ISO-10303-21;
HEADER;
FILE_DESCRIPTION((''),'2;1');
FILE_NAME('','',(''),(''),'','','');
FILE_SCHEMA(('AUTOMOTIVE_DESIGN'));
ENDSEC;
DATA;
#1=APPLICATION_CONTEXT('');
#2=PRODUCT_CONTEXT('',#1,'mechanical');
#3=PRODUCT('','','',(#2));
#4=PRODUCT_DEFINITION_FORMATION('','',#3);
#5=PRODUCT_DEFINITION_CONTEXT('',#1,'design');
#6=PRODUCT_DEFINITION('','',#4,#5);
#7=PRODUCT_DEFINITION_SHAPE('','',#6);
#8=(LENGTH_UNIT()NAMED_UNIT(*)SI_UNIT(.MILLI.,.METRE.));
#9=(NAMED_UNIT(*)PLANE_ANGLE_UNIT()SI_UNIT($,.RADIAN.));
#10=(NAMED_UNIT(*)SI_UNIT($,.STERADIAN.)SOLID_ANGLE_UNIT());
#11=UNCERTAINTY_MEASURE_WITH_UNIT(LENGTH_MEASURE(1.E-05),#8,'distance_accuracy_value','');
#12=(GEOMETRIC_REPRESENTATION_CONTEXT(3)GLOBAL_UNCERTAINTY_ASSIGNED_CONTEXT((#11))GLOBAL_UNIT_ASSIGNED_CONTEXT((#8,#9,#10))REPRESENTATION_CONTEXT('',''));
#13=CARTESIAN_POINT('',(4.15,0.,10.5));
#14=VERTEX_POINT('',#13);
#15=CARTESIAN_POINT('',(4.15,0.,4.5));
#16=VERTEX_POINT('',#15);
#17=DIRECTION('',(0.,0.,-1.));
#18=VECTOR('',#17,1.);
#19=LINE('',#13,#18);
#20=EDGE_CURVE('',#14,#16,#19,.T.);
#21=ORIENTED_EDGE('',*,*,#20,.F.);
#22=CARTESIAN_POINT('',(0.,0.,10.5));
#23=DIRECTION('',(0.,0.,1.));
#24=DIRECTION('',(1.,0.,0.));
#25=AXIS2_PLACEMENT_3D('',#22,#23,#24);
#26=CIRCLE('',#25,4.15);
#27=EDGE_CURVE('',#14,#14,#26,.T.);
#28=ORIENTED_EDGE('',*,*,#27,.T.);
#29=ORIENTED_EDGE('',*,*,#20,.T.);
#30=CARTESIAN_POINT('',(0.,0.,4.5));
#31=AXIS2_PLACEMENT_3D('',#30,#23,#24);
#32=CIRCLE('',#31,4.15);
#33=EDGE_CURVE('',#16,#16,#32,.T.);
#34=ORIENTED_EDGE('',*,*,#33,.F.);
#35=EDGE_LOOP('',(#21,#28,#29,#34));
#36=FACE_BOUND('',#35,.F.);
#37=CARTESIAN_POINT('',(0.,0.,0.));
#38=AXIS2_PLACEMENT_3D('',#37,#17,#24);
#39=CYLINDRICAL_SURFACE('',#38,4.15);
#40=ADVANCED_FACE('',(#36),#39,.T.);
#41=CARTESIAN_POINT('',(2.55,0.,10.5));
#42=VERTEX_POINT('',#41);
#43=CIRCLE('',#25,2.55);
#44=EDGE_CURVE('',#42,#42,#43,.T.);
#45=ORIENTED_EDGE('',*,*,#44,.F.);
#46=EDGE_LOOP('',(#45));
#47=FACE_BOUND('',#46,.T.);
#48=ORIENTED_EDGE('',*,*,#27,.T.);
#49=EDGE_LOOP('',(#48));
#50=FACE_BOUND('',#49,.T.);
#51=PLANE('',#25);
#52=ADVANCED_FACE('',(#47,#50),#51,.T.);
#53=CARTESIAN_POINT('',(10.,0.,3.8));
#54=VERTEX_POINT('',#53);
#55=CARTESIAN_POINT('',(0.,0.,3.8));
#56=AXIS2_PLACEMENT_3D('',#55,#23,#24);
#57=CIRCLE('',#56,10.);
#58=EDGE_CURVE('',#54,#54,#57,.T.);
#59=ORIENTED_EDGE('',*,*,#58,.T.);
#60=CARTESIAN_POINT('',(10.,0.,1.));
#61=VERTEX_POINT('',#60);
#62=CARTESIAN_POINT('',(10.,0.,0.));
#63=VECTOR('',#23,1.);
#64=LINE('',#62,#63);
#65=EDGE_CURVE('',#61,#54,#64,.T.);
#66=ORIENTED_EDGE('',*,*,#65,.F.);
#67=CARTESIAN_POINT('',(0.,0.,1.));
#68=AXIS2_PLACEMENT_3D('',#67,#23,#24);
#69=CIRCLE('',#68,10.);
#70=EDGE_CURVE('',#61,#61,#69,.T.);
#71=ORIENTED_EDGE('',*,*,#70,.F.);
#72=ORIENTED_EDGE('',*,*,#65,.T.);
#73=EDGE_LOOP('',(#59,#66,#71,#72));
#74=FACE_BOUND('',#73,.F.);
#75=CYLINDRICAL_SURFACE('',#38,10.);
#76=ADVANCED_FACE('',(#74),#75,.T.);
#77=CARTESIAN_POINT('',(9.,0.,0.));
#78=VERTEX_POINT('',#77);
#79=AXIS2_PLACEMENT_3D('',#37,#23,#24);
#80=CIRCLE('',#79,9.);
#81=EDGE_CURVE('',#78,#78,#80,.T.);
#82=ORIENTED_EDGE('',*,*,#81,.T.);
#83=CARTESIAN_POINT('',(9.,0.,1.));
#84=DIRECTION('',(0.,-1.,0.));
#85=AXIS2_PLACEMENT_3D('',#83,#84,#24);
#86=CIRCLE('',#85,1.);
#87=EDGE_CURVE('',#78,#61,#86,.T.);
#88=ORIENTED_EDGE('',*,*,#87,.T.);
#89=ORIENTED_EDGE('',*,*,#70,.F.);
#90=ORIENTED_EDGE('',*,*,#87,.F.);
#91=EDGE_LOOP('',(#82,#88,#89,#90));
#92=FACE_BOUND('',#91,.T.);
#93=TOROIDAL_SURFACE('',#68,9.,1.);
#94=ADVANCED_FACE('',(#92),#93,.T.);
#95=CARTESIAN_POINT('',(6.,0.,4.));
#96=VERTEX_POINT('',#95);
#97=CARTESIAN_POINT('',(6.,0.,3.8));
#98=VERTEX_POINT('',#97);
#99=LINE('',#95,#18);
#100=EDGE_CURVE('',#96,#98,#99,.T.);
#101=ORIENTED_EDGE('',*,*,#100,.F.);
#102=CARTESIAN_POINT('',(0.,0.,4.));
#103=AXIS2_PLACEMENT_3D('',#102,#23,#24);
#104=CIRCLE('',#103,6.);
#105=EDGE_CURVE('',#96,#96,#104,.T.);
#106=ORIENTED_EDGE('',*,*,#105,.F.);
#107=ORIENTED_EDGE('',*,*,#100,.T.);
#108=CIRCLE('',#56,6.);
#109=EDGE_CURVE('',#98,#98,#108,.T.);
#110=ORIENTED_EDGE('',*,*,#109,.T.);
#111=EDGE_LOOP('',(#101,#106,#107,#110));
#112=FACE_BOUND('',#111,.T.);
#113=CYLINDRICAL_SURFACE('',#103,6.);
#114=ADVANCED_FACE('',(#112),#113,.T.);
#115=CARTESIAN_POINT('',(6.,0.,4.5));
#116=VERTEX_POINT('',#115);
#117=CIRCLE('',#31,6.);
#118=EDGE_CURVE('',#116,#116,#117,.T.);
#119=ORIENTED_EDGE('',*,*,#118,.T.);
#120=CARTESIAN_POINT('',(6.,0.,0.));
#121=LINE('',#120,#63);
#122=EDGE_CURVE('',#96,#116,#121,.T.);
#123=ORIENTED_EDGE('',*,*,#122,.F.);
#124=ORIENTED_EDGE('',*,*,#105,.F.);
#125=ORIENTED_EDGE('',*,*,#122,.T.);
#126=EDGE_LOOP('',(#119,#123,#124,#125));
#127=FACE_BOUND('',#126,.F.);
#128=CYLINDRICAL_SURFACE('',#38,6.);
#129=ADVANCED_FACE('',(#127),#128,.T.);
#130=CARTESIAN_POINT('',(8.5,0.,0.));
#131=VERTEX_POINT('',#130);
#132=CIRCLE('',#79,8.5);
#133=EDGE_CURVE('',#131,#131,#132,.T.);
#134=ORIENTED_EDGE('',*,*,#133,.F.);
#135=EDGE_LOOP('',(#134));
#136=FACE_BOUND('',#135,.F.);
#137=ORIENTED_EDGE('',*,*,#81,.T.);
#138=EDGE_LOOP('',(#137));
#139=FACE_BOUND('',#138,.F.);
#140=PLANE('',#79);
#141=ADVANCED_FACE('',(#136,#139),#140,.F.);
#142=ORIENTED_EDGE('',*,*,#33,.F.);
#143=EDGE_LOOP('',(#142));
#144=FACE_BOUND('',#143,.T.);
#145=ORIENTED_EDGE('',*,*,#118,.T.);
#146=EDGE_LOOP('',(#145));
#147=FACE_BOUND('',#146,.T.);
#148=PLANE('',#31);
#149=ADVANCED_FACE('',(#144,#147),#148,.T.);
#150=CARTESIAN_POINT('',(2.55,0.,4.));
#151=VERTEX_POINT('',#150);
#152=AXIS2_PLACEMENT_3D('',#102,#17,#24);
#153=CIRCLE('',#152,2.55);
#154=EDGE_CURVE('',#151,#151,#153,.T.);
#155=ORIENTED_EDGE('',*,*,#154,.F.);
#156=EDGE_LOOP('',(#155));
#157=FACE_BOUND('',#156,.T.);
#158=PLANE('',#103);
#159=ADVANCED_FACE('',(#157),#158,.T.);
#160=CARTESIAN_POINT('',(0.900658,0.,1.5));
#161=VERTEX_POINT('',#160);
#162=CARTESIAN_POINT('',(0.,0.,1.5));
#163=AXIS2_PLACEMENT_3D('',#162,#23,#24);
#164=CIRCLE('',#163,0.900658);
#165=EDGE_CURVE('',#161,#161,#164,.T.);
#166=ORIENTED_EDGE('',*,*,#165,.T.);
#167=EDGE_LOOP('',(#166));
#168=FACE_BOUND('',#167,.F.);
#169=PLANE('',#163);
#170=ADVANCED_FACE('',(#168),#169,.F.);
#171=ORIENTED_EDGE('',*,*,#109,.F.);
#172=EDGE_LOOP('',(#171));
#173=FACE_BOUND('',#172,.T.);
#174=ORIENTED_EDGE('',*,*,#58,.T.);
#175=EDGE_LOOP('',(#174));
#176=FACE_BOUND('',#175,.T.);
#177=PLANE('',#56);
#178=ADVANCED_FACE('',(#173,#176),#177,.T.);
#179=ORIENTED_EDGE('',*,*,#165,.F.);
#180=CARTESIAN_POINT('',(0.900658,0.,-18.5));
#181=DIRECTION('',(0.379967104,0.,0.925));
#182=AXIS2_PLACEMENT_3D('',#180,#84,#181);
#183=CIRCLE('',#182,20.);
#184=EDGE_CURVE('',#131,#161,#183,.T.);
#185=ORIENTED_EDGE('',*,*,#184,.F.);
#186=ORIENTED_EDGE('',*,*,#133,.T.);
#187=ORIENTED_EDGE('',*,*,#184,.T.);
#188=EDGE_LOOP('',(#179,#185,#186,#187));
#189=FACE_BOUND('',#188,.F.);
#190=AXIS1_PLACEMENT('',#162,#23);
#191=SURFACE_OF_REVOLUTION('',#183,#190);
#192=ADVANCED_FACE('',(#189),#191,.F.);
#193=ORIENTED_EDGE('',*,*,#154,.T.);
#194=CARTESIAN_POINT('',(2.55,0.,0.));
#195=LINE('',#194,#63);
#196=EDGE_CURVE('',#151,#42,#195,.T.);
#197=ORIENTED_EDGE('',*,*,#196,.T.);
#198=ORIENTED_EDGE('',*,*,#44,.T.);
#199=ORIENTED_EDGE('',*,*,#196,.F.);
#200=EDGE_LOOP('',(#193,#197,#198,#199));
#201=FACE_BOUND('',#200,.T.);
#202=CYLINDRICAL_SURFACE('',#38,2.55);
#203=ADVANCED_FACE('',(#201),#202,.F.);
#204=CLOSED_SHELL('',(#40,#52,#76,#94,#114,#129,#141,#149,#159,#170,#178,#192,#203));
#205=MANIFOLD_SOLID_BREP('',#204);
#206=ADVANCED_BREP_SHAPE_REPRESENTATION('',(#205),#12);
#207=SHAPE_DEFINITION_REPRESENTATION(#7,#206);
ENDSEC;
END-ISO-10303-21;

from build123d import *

# Parameters (mm, degrees)
F0_R     = 10
F0_R_2   = 6
F1_DEPTH = 4
F0_R_3   = 4.15
F0_R_4   = 2.55
F2_DEPTH = 10.5
F3_DEPTH = 4.5
F4_R     = 8.5
F4_R_2   = 6
F5_DEPTH = 1.5
F7_R     = 1
F8_DEPTH = 0.2


# Not quite as in the source:
# - a fillet or chamfer that OpenCascade refuses, or shapes differently, is made with other operations: its cross-section is extruded or revolved along the edge and cut away or added
# - a feature names something its author has since deleted; it is built from what else it names


with BuildPart() as f1:
    # F0 (on Top) → F1 (new body)
    with BuildSketch(Plane.XY):
        Circle(F0_R)
        Circle(F0_R_2, mode=Mode.SUBTRACT)
    extrude(amount=F1_DEPTH)



with BuildPart() as f1b:
    # F0 (on Top) → F1, piece 2 (new body)
    with BuildSketch(Plane.XY):
        Circle(F0_R_3)
        Circle(F0_R_4, mode=Mode.SUBTRACT)
        Circle(F0_R_4)
    extrude(amount=F1_DEPTH)

    # F0 (on Top) → F2 (join)
    with BuildSketch(Plane.XY):
        Circle(F0_R_3)
        Circle(F0_R_4, mode=Mode.SUBTRACT)
    extrude(amount=F2_DEPTH)


with BuildPart() as f1_1:
    add(f1.part)

    add(f1b.part)  # F3 merges F1b
    # F0 (on Top) → F3 (join)
    with BuildSketch(Plane.XY):
        Circle(F0_R_2)
        Circle(F0_R_3, mode=Mode.SUBTRACT)
    extrude(amount=F3_DEPTH)

    # F4 (on face) → F5 (cut)
    with BuildSketch(Plane.XY):
        Circle(F4_R)
        Circle(F4_R_2, mode=Mode.SUBTRACT)
        Circle(F4_R_2)
    extrude(amount=F5_DEPTH, mode=Mode.SUBTRACT)

    # F6: fillet of radius 20 on 1 edges, made by hand

    # F6_s1 → F6_t2 (revolve)
    with BuildSketch(Plane.XZ):
        with BuildLine():
            ThreePointArc((8.5, 0), (4.7736412694, 1.1214168703), (0.9006579232, 1.5))
            Line((0.9006579232, 1.5), (8.5, 1.5))
            Line((8.5, 1.5), (8.5, 0))
        make_face()
    revolve(axis=Axis((0, 0, 1.5), (0, 0, 1)))

    # F7
    f7_edges = [f1_1.edges().sort_by_distance(p)[0] for p in [
        (-10, 0, 0),
    ]]
    fillet(f7_edges, radius=F7_R)

    # F8 (cut): a face of the model
    f8_faces = [f1_1.faces().sort_by_distance(p)[0] for p in [
        (-9.7171572875, 0, 4),
    ]]
    extrude(f8_faces, amount=-F8_DEPTH, mode=Mode.SUBTRACT)


solid = f1_1.part
